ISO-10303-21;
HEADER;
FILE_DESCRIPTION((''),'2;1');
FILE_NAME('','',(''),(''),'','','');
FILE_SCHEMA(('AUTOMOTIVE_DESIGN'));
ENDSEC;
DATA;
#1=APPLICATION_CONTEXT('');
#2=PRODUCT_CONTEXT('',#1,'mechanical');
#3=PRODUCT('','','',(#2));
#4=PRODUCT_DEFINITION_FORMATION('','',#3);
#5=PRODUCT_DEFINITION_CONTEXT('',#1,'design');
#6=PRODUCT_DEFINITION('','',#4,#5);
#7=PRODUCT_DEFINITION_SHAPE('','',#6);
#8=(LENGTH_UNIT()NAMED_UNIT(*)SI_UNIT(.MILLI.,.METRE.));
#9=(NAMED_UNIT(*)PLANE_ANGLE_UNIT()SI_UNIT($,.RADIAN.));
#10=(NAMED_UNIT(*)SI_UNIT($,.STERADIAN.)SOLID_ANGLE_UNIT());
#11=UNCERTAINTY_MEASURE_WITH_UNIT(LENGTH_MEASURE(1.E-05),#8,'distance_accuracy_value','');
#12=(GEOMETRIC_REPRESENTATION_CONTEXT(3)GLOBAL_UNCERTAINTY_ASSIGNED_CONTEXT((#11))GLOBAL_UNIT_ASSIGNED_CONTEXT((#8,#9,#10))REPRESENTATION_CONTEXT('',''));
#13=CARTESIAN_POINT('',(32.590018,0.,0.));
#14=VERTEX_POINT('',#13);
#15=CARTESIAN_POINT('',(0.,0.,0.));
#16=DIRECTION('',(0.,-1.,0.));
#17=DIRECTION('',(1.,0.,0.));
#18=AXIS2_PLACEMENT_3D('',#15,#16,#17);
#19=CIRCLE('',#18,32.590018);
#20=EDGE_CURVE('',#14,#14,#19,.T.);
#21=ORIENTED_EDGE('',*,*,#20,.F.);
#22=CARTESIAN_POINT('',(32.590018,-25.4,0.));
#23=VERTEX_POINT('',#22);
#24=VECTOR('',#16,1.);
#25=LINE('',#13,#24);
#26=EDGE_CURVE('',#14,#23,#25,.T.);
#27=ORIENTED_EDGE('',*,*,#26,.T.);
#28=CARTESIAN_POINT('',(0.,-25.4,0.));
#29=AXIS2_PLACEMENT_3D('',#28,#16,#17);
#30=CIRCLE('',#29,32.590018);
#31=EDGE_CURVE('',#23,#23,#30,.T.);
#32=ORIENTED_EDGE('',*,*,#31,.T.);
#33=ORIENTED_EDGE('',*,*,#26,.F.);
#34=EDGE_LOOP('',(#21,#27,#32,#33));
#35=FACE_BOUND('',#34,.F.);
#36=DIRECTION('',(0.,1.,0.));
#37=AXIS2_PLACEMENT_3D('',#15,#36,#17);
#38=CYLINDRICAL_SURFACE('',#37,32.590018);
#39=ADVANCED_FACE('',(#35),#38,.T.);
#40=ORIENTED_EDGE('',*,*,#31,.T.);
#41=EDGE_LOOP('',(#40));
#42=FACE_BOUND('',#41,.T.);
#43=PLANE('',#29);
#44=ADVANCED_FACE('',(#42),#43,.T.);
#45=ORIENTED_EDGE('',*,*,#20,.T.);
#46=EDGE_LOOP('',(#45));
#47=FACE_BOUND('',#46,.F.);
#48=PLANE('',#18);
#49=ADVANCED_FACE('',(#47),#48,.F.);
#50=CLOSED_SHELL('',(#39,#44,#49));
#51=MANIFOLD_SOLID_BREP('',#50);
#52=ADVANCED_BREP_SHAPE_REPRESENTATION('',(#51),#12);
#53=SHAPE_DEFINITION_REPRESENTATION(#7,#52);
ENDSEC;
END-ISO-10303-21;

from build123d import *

# Parameters (mm, degrees)
F0_R     = 32.5900184781
F1_DEPTH = 25.4


# Not quite as in the source:
# - the program builds the solid bodies; features that only make, move or delete a surface that nothing else refers to are left out


with BuildPart() as f1:
    # F0 (on Front) → F1 (new body)
    with BuildSketch(Plane.XZ):
        Circle(F0_R)
    extrude(amount=F1_DEPTH)


solid = f1.part
